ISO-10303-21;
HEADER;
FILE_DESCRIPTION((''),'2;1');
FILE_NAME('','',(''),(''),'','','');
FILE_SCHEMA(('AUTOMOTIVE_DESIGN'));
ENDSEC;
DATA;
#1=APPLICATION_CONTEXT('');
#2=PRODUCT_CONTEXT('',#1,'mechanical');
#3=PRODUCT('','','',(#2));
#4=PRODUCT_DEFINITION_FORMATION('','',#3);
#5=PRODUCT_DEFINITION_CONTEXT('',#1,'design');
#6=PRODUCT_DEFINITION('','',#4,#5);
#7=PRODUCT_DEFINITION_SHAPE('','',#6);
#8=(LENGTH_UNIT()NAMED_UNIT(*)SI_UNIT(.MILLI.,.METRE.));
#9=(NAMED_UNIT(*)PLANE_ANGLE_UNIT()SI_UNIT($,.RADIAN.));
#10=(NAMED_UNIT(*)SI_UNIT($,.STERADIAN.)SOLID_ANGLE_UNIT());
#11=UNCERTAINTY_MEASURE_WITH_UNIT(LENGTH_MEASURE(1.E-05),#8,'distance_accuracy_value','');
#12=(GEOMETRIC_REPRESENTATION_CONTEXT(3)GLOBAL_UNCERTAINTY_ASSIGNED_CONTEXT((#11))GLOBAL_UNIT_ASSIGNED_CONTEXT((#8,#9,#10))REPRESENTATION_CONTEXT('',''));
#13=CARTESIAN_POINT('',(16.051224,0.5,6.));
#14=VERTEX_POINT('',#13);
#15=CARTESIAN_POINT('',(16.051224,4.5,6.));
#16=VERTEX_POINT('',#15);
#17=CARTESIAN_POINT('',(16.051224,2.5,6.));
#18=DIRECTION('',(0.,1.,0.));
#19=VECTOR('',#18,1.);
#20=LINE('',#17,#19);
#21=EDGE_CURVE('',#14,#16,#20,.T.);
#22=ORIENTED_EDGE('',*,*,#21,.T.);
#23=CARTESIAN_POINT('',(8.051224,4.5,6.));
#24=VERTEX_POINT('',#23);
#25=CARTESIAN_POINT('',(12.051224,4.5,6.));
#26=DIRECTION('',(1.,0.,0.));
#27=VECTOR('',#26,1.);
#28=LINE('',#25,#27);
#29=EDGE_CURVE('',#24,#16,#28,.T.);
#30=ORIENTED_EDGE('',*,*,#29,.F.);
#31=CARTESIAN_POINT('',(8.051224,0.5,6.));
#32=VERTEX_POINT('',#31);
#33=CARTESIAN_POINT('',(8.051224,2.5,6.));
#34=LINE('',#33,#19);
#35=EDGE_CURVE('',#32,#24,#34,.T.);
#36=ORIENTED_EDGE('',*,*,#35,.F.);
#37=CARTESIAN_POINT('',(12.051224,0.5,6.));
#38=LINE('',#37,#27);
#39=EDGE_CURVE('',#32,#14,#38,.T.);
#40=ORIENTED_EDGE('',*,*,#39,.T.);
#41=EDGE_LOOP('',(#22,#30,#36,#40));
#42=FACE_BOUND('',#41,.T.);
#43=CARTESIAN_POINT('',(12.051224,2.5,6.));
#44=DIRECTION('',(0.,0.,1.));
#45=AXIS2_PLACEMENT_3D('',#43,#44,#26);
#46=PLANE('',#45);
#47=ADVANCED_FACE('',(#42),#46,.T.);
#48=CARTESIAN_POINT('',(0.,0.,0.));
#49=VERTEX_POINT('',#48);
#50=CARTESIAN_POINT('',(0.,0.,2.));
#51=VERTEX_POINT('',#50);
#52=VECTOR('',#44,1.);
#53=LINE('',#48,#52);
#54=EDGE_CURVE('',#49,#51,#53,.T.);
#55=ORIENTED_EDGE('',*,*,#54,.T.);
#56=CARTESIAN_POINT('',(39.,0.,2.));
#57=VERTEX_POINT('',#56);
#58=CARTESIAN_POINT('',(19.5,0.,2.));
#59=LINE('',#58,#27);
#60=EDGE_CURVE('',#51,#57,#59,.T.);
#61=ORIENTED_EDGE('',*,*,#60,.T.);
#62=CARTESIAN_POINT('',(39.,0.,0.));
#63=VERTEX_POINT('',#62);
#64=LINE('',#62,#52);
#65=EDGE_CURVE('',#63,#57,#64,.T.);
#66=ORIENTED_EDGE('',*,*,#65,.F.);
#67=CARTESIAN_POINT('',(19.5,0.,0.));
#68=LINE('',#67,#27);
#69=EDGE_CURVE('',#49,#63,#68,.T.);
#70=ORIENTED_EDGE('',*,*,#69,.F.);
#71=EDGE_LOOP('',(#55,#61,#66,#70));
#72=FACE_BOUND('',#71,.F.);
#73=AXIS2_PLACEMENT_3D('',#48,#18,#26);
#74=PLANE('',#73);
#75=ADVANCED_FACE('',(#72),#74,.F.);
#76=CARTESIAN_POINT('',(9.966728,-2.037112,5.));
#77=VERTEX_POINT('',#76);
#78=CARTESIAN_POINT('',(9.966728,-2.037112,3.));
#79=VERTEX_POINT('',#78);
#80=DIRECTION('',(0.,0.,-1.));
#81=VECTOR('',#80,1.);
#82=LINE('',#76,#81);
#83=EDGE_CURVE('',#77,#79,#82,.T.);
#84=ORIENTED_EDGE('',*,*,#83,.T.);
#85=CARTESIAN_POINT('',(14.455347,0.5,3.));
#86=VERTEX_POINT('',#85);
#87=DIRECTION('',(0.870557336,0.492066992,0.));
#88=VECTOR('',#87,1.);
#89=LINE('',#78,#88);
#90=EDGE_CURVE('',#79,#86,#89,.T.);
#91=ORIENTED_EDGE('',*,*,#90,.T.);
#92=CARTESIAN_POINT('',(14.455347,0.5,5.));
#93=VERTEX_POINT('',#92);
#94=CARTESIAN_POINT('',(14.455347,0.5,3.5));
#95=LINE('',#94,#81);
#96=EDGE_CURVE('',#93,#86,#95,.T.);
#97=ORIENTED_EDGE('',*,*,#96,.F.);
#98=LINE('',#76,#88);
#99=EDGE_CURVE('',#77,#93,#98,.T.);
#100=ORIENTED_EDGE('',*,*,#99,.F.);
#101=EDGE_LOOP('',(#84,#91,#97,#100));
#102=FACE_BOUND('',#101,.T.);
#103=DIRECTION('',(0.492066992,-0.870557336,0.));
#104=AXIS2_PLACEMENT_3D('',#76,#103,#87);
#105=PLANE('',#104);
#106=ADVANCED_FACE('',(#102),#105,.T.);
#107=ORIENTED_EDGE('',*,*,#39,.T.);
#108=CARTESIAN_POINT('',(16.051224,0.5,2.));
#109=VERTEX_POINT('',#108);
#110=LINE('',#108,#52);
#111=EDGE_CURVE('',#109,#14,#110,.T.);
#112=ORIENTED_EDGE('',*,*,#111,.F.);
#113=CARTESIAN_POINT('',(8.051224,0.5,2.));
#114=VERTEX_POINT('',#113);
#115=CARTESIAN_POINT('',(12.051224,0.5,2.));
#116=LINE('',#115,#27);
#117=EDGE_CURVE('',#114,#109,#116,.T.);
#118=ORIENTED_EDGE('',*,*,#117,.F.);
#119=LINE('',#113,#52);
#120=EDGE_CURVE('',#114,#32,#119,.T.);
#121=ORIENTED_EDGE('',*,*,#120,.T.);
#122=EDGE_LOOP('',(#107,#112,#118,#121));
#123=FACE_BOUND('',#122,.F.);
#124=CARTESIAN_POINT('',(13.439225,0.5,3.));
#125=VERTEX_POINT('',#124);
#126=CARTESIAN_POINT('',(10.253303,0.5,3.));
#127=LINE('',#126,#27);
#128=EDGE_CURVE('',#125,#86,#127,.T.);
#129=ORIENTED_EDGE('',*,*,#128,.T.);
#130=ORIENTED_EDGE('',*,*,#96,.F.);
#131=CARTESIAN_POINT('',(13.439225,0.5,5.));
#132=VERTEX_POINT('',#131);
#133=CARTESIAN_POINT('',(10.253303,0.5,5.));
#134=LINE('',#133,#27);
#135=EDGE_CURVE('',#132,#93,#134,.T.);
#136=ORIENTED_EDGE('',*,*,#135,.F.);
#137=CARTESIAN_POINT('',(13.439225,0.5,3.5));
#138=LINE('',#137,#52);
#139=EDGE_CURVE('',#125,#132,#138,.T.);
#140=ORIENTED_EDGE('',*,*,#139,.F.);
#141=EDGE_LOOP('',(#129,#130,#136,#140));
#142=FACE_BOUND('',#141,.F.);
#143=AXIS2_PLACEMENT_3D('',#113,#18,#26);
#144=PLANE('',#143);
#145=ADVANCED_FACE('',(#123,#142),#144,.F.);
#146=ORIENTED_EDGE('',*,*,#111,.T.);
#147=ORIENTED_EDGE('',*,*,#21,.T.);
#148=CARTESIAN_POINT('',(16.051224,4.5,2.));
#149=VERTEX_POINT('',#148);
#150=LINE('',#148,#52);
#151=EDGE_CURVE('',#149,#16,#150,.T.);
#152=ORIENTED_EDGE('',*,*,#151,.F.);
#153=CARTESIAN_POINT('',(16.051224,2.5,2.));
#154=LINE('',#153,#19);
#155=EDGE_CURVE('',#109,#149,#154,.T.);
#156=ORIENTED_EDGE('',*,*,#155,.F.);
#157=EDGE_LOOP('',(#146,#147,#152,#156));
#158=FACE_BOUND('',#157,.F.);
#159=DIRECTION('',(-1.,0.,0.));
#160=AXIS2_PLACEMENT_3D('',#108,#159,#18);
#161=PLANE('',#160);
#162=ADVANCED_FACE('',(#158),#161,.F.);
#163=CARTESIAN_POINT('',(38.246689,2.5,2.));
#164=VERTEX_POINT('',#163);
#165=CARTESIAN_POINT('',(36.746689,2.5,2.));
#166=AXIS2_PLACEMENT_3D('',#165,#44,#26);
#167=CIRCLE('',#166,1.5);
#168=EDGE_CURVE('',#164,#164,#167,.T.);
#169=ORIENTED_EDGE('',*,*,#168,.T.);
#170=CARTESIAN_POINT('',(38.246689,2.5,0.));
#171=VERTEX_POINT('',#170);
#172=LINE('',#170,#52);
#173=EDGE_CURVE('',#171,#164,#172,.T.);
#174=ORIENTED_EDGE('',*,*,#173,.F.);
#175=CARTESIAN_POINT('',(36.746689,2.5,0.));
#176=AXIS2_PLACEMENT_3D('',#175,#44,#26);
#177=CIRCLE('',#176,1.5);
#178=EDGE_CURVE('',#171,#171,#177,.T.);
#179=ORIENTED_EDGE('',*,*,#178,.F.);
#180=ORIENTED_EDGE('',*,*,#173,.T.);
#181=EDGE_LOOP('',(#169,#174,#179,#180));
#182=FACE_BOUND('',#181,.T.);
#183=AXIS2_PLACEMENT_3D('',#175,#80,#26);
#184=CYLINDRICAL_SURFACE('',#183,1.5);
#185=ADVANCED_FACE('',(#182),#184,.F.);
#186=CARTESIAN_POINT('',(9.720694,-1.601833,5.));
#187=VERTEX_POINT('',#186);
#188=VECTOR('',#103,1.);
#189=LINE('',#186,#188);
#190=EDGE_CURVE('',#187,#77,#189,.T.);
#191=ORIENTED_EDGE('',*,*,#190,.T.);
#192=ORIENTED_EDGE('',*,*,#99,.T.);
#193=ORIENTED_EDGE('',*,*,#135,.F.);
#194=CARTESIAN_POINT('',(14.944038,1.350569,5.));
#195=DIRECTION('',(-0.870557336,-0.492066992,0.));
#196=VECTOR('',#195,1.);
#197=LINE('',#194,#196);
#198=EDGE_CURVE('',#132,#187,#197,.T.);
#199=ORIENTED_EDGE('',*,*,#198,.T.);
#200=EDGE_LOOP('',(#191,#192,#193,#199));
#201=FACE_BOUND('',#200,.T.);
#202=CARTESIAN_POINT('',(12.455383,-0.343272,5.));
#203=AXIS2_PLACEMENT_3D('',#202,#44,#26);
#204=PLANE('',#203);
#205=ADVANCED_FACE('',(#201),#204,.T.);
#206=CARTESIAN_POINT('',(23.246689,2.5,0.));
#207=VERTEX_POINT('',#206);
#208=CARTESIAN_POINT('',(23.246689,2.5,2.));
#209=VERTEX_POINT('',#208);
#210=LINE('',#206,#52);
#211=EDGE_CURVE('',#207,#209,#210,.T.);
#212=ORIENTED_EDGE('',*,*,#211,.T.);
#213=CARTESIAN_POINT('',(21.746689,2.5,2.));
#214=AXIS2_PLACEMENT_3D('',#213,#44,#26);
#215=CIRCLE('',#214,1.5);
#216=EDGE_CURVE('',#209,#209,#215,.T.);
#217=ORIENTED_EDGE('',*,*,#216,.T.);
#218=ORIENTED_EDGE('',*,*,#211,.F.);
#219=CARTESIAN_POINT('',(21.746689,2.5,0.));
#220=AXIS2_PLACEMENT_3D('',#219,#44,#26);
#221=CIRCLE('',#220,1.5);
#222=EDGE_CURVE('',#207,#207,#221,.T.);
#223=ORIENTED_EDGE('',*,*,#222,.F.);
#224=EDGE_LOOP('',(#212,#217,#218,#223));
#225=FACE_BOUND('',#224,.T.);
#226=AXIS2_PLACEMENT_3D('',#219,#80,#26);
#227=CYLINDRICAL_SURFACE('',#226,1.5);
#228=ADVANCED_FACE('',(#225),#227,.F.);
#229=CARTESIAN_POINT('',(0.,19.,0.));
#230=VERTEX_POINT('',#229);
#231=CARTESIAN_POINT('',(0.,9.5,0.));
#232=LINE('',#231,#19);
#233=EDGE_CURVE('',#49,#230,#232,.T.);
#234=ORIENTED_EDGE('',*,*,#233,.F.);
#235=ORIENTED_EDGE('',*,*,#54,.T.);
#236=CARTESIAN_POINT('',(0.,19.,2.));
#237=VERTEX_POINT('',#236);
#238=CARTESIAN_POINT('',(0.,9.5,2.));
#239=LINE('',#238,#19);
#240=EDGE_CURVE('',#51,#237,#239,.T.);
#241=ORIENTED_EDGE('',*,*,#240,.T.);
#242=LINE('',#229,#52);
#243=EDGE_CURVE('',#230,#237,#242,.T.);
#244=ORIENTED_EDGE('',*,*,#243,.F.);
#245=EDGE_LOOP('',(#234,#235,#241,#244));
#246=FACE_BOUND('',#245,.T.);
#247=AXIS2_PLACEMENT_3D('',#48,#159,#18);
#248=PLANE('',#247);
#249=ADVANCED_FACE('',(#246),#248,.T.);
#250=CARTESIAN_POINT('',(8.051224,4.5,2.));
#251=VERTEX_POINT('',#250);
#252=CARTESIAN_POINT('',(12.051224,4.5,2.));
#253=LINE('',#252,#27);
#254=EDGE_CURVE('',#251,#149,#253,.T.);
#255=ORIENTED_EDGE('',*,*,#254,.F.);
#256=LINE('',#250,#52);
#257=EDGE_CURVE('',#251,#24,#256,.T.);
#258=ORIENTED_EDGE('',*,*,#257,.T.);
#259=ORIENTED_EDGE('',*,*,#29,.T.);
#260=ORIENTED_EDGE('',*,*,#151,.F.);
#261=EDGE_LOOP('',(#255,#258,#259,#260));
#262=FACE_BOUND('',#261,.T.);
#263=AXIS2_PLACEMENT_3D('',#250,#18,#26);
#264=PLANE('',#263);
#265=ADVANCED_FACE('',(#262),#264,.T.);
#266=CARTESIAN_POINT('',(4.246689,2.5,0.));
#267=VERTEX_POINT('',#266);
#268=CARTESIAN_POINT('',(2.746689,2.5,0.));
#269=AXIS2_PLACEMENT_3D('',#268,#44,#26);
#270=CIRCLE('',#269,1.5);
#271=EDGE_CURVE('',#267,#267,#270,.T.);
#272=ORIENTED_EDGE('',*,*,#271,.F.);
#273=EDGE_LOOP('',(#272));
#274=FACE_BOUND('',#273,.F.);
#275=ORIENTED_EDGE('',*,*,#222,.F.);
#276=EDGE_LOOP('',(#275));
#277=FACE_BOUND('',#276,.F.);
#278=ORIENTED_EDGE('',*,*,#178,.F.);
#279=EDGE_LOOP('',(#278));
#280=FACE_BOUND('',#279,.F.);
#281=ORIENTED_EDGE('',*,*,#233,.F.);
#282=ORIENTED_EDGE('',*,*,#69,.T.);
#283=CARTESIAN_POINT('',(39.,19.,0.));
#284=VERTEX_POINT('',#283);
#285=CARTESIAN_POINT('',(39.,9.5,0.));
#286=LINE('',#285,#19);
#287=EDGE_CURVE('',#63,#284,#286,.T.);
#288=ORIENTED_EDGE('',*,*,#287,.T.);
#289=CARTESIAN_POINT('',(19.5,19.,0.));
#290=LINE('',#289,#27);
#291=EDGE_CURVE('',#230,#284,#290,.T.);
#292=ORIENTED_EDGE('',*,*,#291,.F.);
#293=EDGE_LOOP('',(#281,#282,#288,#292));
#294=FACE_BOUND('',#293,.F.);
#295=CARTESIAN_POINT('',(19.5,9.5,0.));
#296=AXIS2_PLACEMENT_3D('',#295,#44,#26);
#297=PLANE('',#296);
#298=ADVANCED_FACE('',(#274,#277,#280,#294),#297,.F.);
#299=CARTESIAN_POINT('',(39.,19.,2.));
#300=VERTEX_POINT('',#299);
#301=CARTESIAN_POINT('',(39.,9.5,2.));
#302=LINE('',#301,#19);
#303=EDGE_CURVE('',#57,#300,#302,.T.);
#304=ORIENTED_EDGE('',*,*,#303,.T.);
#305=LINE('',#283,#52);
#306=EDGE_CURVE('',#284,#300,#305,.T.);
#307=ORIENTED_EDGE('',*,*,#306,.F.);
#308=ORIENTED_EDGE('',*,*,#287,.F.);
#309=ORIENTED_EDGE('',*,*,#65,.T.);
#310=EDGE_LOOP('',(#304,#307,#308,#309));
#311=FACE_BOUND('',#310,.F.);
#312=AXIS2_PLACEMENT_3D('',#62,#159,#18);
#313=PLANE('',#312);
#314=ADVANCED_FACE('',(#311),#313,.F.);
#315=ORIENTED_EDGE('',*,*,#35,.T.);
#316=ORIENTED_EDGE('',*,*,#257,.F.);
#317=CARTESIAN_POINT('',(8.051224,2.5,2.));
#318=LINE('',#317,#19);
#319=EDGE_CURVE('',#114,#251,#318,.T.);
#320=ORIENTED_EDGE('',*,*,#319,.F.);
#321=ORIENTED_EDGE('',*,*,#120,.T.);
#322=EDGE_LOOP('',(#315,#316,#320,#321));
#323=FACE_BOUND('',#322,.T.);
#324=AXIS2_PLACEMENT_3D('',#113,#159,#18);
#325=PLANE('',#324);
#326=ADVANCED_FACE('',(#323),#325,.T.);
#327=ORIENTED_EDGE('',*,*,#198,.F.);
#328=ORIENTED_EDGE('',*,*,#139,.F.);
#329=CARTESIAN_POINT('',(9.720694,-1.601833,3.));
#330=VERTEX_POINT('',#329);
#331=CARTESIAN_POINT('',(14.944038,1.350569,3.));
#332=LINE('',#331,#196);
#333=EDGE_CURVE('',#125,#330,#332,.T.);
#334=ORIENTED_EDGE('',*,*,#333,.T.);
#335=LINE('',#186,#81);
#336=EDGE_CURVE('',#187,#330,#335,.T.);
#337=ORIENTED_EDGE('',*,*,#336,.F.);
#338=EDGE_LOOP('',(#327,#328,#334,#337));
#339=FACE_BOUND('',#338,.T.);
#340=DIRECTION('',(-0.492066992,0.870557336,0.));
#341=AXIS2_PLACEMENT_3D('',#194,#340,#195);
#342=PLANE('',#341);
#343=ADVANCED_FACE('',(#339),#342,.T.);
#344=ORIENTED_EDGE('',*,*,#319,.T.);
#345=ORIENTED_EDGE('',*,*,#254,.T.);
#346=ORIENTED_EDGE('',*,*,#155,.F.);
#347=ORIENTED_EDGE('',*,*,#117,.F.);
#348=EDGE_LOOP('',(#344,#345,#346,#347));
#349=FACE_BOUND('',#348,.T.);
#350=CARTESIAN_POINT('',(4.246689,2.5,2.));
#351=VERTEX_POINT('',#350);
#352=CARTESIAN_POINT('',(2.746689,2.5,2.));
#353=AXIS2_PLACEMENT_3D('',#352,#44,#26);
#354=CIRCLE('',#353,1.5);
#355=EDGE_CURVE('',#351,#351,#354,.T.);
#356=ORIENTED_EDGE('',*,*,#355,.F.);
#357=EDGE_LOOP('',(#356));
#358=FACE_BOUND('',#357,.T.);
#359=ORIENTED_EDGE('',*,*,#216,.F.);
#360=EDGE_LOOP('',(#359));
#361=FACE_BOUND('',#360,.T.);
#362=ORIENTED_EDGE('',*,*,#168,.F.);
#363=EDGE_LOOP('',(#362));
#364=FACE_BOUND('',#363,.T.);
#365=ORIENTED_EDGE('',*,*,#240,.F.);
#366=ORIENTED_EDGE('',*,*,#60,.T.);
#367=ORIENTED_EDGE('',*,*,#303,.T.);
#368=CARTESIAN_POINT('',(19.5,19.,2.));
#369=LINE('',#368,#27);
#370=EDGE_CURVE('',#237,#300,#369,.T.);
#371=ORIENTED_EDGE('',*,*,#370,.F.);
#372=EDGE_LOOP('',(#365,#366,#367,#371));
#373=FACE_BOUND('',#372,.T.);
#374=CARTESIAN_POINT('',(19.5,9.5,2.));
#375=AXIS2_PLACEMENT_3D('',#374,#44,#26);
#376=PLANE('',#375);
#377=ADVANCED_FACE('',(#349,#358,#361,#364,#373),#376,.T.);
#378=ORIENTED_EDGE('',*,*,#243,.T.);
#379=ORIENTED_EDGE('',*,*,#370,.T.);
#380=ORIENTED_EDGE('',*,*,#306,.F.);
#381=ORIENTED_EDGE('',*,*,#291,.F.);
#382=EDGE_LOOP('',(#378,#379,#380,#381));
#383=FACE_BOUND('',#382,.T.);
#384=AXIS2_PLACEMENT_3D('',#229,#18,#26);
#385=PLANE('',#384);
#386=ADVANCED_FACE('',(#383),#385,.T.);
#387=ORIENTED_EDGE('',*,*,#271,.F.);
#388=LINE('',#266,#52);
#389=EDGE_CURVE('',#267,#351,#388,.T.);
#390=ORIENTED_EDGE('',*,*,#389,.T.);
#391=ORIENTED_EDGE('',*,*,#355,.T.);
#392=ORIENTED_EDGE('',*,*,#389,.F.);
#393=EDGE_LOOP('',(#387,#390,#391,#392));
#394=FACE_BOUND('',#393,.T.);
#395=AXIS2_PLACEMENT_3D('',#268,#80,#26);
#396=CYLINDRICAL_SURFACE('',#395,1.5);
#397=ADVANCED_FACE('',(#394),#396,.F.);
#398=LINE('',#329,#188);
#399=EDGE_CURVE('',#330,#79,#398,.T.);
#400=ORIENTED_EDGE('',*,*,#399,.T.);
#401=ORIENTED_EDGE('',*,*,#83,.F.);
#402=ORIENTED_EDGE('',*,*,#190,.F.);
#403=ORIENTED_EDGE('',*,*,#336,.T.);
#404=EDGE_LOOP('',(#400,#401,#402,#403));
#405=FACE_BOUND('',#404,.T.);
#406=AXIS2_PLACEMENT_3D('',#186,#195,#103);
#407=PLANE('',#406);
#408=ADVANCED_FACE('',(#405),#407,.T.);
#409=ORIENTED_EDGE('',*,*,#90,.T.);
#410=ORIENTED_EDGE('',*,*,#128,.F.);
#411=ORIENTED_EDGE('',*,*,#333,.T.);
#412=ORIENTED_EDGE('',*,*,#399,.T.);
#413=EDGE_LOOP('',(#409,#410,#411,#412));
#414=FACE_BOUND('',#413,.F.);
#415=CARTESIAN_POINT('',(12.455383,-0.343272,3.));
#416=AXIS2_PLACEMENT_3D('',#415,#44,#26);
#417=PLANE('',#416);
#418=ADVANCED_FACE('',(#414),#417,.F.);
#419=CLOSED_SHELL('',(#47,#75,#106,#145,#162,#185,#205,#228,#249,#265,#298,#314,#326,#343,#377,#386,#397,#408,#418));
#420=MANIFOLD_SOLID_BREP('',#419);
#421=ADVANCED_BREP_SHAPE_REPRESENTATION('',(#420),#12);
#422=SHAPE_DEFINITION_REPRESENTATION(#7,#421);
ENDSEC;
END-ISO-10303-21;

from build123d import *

# Parameters (mm, degrees)
F0_W     = 39
F0_H     = 19
F0_R     = 1.5
F1_DEPTH = 2
F2_W     = 8
F2_H     = 4
F3_DEPTH = 4
F6_DEPTH = 2


with BuildPart() as f1:
    # F0 (on Top) → F1 (new body)
    with BuildSketch(Plane.XY):
        with Locations((19.5, 9.5)):
            Rectangle(F0_W, F0_H)
        with Locations((2.7466891247, 2.5)):
            Circle(F0_R, mode=Mode.SUBTRACT)
        with Locations((21.7466891247, 2.5)):
            Circle(F0_R, mode=Mode.SUBTRACT)
        with Locations((36.7466891247, 2.5)):
            Circle(F0_R, mode=Mode.SUBTRACT)
    extrude(amount=F1_DEPTH)

    # F2 (on face) → F3 (join)
    with BuildSketch(Plane.XY.offset(2)):
        with Locations((12.0512238369, 2.5)):
            Rectangle(F2_W, F2_H)
    extrude(amount=F3_DEPTH)

    # F5 (on face) → F6 (join)
    with BuildSketch(Plane.XY.offset(5)):
        Polygon((15.1900717236, 0.915290064), (14.9440382274, 1.3505687319), (9.7206942123, -1.6018332224), (9.9667277085, -2.0371118903), align=None)
    extrude(amount=-F6_DEPTH)


solid = f1.part
